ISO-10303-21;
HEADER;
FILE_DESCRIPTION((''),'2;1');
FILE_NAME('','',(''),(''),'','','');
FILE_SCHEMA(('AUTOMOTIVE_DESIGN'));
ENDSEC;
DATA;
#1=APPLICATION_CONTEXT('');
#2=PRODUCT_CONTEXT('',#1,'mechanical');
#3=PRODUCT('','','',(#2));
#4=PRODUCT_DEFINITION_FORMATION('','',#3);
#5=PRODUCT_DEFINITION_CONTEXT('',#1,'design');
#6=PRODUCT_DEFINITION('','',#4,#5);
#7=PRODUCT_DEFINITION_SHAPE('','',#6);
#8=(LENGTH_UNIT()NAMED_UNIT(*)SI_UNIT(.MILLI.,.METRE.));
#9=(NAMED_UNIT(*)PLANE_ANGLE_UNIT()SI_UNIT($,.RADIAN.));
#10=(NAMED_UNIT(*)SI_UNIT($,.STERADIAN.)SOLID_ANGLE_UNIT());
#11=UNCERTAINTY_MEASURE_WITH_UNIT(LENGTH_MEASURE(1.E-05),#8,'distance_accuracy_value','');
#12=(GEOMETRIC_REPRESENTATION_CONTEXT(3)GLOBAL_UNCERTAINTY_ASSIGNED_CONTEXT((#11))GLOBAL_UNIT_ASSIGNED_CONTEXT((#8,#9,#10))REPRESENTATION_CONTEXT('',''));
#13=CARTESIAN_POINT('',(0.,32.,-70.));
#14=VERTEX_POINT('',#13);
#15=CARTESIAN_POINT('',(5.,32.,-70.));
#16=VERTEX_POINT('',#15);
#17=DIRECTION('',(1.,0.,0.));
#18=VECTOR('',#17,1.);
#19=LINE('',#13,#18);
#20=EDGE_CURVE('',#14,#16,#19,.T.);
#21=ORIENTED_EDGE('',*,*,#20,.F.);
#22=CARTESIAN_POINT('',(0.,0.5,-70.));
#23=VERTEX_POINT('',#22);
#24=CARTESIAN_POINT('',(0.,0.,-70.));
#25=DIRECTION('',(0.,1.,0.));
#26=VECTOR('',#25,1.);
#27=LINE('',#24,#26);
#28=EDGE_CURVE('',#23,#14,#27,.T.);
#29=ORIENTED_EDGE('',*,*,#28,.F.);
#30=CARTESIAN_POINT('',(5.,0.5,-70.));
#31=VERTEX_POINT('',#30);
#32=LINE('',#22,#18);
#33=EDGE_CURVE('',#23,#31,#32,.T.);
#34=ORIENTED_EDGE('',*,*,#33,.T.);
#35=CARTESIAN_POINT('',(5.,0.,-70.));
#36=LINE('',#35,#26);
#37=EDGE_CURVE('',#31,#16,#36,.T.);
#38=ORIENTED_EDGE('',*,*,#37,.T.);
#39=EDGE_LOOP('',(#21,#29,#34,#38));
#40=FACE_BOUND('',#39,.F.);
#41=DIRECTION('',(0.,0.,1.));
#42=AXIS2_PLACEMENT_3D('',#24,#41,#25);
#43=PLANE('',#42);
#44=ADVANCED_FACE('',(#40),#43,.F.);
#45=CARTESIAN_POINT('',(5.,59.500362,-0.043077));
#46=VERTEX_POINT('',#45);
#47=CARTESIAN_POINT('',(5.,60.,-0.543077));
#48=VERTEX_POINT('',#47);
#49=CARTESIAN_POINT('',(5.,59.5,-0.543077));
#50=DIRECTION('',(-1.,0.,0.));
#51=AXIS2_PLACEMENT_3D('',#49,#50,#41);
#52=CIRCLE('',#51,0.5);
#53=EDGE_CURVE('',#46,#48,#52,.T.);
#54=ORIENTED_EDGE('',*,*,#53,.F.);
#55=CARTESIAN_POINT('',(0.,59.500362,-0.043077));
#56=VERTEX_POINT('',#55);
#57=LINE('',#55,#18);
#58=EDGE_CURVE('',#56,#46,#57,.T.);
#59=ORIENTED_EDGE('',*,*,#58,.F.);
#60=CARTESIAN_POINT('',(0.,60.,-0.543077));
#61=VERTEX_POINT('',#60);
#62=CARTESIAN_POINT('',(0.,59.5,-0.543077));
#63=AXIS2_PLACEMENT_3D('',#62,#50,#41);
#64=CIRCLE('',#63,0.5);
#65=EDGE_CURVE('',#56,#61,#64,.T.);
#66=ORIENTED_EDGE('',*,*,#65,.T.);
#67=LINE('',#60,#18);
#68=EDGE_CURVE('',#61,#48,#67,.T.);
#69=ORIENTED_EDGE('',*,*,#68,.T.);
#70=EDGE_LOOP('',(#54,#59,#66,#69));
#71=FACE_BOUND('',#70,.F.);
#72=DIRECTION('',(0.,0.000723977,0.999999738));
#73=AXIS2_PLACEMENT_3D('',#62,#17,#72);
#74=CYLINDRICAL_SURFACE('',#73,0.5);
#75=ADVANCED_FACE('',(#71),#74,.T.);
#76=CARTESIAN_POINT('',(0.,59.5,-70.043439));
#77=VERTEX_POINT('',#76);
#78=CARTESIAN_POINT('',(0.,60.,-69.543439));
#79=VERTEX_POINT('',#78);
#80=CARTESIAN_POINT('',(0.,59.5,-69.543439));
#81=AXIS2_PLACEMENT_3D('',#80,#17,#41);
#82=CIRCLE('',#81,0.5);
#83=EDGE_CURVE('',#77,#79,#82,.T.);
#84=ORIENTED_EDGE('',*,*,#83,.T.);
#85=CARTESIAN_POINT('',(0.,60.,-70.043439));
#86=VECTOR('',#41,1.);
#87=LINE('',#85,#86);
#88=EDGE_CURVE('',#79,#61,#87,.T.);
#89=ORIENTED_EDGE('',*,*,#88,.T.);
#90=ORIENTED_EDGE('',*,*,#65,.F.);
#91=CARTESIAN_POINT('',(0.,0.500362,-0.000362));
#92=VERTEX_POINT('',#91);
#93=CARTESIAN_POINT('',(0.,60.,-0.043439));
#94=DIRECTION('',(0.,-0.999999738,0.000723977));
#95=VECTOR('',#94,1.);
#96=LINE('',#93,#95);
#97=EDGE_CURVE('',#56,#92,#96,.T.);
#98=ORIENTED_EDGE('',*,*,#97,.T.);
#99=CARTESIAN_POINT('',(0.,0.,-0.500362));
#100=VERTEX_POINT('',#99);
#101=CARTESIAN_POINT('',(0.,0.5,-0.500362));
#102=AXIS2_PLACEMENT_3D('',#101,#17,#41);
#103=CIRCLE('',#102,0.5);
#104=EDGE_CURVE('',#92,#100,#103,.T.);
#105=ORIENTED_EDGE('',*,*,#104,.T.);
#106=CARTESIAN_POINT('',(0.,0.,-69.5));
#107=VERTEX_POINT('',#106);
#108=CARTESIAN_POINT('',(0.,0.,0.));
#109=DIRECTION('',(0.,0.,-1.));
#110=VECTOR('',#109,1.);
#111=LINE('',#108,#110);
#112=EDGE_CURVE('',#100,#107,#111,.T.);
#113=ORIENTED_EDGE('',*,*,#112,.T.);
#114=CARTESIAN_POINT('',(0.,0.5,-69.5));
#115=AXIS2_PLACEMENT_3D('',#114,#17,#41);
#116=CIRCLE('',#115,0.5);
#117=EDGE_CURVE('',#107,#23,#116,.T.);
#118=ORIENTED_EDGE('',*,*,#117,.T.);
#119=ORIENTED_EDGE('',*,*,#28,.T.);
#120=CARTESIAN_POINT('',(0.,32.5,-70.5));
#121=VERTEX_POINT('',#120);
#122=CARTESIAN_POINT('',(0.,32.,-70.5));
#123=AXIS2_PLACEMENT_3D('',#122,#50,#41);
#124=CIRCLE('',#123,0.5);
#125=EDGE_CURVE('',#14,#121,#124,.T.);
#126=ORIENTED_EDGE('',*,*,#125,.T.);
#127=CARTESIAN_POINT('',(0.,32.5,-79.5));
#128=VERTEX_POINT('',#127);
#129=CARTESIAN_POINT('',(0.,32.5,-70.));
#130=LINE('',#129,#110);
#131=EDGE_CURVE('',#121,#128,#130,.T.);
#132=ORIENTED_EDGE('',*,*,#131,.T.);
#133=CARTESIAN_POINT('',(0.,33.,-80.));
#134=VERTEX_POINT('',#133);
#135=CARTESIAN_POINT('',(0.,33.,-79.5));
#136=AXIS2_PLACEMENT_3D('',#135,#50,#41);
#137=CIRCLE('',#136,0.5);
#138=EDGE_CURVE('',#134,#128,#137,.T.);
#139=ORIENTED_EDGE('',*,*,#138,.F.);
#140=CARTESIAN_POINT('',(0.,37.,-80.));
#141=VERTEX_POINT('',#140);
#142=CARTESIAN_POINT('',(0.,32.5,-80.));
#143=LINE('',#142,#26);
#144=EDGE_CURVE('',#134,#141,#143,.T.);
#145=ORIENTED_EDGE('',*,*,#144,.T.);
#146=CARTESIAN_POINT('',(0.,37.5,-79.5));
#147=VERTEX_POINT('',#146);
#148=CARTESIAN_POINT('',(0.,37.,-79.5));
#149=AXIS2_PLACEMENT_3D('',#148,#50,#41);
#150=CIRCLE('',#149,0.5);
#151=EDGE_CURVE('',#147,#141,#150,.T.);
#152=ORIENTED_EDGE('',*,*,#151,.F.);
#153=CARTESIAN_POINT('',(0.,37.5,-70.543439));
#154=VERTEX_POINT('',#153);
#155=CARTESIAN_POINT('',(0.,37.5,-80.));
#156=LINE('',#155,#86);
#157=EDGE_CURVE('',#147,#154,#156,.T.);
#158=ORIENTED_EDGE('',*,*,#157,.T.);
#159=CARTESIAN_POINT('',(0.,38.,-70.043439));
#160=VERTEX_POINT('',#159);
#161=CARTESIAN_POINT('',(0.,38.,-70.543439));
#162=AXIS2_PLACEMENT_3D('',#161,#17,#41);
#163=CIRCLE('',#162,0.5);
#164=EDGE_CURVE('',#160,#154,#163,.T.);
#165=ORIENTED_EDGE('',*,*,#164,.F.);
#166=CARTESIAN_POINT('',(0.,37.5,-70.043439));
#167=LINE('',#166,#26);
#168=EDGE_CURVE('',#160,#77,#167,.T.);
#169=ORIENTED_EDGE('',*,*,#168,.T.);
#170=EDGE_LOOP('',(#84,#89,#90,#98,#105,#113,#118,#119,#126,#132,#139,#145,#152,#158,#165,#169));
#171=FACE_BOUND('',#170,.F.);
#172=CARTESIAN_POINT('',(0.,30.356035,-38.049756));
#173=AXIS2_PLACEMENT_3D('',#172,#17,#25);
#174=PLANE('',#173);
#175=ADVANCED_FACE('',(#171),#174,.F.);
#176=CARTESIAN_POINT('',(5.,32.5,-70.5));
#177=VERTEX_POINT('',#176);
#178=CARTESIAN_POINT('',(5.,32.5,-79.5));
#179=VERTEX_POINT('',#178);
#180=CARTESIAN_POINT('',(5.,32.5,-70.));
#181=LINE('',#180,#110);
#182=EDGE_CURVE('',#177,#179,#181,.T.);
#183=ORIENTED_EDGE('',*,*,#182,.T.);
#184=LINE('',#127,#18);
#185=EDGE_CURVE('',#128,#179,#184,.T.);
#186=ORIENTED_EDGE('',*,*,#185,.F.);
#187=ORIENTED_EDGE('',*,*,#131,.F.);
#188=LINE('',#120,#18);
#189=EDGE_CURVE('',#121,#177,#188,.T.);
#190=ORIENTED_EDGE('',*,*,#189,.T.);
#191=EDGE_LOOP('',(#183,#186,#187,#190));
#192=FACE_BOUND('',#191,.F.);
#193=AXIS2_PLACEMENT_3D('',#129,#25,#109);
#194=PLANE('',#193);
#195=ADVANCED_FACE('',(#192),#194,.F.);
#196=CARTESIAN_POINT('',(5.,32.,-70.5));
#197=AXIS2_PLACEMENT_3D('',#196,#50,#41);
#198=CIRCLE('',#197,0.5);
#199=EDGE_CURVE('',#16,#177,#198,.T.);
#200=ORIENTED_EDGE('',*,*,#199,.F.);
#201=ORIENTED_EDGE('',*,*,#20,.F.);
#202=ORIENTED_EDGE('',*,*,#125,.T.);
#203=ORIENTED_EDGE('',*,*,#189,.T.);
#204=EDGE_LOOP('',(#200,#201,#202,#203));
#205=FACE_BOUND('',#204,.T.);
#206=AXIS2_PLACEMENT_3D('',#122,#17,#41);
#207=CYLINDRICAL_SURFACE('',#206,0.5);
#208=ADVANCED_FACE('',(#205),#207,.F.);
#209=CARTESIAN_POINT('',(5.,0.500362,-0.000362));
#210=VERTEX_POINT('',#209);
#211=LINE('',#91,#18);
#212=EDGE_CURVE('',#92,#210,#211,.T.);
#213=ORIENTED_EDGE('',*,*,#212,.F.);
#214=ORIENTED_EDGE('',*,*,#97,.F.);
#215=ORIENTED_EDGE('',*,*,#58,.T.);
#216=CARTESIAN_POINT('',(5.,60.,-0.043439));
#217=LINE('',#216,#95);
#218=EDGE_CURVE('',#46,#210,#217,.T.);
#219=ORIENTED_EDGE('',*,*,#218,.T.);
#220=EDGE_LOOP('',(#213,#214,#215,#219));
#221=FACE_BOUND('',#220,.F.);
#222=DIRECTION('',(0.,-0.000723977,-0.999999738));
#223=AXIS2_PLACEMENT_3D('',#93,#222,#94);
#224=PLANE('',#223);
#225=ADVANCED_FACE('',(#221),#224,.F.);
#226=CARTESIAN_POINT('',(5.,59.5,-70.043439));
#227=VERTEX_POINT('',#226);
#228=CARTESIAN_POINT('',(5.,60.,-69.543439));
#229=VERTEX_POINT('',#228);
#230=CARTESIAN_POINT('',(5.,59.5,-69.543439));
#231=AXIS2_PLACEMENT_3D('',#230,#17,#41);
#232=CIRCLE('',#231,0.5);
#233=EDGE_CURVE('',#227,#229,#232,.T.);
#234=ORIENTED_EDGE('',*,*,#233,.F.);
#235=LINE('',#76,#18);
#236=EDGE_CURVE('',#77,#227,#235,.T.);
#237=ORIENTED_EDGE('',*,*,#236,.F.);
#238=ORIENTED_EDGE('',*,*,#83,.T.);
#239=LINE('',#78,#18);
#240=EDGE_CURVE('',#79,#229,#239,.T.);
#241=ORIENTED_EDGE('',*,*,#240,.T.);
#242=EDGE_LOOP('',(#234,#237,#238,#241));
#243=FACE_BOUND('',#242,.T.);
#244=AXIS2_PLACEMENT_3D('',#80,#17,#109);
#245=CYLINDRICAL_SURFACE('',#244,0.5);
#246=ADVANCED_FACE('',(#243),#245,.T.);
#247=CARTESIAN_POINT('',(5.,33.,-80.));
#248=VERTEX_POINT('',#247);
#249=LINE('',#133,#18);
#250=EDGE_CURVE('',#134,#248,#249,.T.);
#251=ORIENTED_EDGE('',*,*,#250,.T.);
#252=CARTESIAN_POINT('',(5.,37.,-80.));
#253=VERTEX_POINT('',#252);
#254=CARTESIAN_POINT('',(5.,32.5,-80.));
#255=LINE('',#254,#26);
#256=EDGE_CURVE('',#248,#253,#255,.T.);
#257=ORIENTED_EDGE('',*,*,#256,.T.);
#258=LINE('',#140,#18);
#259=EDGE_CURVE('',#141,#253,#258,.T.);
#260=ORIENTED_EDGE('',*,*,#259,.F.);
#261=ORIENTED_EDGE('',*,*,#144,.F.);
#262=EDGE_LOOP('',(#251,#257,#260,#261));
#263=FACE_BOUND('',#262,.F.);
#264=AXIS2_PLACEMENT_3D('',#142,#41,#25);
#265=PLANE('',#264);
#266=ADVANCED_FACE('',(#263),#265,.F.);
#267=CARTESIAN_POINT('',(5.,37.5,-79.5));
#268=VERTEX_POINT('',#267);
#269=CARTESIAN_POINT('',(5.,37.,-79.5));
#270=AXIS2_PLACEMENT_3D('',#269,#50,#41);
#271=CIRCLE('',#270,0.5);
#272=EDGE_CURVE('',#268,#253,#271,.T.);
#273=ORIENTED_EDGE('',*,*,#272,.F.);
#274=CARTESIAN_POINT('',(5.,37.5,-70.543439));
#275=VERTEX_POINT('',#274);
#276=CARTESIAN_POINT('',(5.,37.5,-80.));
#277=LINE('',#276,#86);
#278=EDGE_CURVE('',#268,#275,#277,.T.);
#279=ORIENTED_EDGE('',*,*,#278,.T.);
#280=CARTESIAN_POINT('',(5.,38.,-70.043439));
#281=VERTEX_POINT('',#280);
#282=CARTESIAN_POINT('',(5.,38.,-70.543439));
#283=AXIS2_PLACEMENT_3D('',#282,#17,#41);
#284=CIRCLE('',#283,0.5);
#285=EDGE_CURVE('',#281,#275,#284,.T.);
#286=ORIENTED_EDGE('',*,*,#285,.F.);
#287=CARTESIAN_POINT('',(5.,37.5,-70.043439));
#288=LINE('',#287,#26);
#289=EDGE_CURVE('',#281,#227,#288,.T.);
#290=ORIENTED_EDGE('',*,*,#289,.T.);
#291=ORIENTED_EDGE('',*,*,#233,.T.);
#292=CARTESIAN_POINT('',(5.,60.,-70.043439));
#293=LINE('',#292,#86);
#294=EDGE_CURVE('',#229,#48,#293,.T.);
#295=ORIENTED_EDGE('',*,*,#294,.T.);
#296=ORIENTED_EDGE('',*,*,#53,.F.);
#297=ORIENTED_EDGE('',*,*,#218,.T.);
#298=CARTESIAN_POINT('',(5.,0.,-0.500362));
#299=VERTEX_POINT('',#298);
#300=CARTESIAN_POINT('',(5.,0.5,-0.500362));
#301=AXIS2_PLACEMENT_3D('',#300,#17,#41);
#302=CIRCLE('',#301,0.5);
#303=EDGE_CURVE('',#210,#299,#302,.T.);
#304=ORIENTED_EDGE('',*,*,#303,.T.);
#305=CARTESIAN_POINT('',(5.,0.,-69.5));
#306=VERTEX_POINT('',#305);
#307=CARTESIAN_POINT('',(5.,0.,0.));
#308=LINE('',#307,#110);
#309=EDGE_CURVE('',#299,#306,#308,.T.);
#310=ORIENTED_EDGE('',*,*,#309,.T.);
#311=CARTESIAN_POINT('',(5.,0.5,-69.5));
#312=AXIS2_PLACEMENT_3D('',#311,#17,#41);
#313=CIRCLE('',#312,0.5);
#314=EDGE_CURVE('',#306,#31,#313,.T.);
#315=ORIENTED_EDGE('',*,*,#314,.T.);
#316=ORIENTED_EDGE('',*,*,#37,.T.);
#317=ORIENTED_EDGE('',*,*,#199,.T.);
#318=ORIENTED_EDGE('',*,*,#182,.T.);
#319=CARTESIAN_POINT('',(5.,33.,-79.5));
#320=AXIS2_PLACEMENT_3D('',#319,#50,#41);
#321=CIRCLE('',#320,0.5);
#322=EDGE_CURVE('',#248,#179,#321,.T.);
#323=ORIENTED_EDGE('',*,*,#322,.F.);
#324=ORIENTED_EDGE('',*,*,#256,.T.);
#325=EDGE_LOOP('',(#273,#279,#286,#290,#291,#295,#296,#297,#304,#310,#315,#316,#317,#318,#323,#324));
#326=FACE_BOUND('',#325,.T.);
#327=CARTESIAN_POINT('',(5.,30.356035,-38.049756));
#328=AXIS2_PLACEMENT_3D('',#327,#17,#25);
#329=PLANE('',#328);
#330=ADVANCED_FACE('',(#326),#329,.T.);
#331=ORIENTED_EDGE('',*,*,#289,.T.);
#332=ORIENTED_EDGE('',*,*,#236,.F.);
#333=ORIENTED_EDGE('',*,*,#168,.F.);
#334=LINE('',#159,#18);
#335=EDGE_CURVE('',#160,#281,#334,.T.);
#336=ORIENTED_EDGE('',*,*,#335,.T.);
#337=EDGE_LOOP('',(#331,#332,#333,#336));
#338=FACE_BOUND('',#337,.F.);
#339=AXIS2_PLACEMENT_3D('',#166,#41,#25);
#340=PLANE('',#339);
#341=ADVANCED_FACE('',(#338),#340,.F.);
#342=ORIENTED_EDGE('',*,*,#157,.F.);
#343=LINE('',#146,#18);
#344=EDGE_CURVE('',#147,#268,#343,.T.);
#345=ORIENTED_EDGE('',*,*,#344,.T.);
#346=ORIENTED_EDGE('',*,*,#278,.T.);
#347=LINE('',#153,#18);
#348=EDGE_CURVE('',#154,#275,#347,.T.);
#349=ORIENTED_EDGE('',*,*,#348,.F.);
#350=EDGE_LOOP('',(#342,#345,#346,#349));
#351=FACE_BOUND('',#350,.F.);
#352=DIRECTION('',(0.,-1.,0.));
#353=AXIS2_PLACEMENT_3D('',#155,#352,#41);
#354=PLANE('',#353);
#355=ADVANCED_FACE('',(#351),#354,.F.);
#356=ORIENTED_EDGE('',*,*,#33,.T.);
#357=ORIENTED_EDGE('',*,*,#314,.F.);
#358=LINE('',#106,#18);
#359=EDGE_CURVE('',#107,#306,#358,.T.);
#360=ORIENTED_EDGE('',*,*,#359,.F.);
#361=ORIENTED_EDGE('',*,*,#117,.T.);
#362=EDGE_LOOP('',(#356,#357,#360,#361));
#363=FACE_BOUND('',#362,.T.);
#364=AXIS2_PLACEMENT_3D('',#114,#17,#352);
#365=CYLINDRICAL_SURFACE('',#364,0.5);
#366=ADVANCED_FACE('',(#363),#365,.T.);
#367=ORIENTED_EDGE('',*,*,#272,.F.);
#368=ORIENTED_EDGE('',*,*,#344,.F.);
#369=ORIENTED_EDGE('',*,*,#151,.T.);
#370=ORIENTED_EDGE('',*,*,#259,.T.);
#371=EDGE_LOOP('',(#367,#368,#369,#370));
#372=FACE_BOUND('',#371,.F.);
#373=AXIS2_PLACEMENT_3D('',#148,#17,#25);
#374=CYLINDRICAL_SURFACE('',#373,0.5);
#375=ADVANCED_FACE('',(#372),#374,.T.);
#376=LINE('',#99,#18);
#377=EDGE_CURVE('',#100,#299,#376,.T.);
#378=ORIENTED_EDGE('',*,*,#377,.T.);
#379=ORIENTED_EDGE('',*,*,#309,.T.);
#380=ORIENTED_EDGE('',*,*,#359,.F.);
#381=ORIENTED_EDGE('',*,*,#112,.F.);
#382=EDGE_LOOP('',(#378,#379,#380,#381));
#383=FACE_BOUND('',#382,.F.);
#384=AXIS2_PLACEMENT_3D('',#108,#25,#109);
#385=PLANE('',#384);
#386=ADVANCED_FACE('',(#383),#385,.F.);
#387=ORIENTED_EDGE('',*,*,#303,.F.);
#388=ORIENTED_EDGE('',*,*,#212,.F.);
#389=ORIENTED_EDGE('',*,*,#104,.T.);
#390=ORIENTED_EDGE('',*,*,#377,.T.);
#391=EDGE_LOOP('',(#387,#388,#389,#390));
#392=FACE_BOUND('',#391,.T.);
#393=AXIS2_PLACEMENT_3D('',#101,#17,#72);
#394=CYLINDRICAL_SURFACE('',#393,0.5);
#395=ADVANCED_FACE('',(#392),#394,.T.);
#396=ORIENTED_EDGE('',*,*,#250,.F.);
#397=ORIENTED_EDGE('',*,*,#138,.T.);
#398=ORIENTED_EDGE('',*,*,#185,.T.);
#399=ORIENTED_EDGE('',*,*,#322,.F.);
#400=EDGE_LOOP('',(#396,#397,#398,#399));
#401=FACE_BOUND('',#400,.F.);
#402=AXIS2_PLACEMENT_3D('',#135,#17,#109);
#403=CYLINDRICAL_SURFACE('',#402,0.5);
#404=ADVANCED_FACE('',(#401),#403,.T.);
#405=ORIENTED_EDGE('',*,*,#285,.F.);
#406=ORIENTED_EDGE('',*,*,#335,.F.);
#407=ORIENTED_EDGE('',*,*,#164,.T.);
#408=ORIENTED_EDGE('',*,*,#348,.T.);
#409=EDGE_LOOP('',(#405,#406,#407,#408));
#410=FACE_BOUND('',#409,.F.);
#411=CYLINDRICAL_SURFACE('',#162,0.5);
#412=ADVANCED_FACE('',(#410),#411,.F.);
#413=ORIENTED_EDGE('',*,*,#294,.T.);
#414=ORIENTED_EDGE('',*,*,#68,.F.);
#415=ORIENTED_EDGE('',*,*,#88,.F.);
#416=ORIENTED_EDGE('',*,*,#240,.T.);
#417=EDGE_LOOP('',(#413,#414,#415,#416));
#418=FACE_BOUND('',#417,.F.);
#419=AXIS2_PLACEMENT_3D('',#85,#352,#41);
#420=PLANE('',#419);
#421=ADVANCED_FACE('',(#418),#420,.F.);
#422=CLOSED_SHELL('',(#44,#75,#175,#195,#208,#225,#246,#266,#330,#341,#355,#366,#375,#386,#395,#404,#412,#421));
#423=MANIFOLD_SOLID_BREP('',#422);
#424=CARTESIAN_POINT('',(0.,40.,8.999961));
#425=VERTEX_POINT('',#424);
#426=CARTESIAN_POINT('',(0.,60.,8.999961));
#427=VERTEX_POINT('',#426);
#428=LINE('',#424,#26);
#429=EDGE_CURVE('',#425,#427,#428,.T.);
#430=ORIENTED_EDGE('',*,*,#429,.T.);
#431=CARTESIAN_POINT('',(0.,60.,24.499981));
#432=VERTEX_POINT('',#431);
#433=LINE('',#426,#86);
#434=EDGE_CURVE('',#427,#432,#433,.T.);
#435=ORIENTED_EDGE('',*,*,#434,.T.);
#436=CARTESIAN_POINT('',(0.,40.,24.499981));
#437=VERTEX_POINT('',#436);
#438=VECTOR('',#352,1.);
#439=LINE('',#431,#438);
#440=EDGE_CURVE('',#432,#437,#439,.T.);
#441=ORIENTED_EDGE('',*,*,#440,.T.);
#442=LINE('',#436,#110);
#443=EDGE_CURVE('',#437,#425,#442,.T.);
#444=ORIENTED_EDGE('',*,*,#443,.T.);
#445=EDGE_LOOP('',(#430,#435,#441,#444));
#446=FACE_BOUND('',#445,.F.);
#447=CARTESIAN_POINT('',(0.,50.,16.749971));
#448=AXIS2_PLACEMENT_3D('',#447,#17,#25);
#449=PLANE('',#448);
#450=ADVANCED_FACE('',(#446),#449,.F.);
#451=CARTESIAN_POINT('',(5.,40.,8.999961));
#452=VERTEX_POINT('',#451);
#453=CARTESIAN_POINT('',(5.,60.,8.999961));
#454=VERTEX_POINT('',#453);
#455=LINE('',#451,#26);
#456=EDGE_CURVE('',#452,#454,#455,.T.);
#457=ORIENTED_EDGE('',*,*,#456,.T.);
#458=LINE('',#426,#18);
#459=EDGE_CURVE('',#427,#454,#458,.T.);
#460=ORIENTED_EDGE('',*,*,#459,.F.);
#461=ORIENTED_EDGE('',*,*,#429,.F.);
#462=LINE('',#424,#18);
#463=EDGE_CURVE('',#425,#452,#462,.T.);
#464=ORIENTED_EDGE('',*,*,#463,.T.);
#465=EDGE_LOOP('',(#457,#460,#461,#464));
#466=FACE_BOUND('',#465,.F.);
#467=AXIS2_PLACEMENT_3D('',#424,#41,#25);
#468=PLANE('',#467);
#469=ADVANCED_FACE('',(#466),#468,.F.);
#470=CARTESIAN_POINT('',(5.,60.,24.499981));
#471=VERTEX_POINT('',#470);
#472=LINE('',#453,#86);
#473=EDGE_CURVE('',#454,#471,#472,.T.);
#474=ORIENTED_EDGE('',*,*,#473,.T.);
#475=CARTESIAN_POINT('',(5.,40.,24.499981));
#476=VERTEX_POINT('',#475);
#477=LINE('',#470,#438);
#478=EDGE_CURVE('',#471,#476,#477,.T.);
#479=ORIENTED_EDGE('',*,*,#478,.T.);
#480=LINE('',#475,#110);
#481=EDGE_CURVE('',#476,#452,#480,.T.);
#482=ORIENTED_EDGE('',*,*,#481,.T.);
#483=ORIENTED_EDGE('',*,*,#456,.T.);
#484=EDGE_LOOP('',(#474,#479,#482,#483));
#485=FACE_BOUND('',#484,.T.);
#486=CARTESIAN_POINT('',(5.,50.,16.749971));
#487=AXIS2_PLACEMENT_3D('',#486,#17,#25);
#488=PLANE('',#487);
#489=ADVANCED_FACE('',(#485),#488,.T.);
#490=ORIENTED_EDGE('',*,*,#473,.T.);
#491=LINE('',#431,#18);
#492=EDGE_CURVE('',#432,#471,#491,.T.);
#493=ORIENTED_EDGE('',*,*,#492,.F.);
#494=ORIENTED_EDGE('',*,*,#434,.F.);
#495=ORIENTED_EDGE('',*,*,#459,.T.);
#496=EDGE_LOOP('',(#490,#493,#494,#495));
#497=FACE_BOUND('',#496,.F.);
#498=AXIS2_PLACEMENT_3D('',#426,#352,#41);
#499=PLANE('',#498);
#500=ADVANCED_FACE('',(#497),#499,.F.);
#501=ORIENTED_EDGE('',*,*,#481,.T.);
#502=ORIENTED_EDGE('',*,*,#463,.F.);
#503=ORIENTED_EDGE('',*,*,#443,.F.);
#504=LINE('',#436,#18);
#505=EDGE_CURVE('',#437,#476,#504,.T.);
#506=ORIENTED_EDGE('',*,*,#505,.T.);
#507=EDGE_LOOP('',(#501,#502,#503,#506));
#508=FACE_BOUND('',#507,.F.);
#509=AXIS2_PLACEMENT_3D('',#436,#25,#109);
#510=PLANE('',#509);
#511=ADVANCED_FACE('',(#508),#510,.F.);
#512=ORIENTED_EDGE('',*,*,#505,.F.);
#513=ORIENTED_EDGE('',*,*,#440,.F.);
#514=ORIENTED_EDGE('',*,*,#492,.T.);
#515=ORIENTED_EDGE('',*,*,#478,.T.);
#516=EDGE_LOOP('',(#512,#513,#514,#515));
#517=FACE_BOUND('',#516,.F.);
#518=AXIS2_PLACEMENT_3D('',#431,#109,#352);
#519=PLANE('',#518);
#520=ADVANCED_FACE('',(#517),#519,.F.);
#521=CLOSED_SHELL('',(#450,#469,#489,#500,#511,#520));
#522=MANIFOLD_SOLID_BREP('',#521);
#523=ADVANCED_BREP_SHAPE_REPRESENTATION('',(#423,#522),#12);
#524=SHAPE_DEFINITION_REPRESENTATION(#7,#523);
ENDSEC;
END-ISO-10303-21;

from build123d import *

# Parameters (mm, degrees)
F1_DEPTH = 5
F2_R     = 0.5
F3_R     = 0.5
F4_R     = 0.5


# Not quite as in the source:
# - a feature names something its author has since deleted; it is built from what else it names


with BuildPart() as f1:
    # F0 (on Right) → F1 (new body)
    with BuildSketch(Plane.YZ):
        Polygon((60, -0.0434386059), (0, 0), (0, -70), (12, -70), (12.4011761725, -70), (32.5, -70), (32.5, -80), (37.5, -80), (37.5, -70.0434386059), (60, -70.0434386059), align=None)
    extrude(amount=F1_DEPTH)

    # F2
    f2_edges = [f1.edges().sort_by_distance(p)[0] for p in [
        (2.5, 0, 0),
        (2.5, 0, -70),
        (2.5, 60, -70.043439),
        (2.5, 60, -0.043439),
    ]]
    fillet(f2_edges, radius=F2_R)

    # F3
    f3_edges = [f1.edges().sort_by_distance(p)[0] for p in [
        (2.5, 37.5, -70.043439),
        (2.5, 32.5, -70),
    ]]
    fillet(f3_edges, radius=F3_R)

    # F4
    f4_edges = [f1.edges().sort_by_distance(p)[0] for p in [
        (2.5, 32.5, -80),
        (2.5, 37.5, -80),
    ]]
    fillet(f4_edges, radius=F4_R)


with BuildPart() as f1b:
    # F0 (on Right) → F1, piece 2 (new body)
    with BuildSketch(Plane.YZ):
        Polygon((40, 8.9999613941), (42.5, 8.9999613941), (60, 8.9999613941), (60, 24.499980697), (42.5, 24.499980697), (40, 24.499980697), align=None)
    extrude(amount=F1_DEPTH)


solid = Compound([f1.part, f1b.part])
